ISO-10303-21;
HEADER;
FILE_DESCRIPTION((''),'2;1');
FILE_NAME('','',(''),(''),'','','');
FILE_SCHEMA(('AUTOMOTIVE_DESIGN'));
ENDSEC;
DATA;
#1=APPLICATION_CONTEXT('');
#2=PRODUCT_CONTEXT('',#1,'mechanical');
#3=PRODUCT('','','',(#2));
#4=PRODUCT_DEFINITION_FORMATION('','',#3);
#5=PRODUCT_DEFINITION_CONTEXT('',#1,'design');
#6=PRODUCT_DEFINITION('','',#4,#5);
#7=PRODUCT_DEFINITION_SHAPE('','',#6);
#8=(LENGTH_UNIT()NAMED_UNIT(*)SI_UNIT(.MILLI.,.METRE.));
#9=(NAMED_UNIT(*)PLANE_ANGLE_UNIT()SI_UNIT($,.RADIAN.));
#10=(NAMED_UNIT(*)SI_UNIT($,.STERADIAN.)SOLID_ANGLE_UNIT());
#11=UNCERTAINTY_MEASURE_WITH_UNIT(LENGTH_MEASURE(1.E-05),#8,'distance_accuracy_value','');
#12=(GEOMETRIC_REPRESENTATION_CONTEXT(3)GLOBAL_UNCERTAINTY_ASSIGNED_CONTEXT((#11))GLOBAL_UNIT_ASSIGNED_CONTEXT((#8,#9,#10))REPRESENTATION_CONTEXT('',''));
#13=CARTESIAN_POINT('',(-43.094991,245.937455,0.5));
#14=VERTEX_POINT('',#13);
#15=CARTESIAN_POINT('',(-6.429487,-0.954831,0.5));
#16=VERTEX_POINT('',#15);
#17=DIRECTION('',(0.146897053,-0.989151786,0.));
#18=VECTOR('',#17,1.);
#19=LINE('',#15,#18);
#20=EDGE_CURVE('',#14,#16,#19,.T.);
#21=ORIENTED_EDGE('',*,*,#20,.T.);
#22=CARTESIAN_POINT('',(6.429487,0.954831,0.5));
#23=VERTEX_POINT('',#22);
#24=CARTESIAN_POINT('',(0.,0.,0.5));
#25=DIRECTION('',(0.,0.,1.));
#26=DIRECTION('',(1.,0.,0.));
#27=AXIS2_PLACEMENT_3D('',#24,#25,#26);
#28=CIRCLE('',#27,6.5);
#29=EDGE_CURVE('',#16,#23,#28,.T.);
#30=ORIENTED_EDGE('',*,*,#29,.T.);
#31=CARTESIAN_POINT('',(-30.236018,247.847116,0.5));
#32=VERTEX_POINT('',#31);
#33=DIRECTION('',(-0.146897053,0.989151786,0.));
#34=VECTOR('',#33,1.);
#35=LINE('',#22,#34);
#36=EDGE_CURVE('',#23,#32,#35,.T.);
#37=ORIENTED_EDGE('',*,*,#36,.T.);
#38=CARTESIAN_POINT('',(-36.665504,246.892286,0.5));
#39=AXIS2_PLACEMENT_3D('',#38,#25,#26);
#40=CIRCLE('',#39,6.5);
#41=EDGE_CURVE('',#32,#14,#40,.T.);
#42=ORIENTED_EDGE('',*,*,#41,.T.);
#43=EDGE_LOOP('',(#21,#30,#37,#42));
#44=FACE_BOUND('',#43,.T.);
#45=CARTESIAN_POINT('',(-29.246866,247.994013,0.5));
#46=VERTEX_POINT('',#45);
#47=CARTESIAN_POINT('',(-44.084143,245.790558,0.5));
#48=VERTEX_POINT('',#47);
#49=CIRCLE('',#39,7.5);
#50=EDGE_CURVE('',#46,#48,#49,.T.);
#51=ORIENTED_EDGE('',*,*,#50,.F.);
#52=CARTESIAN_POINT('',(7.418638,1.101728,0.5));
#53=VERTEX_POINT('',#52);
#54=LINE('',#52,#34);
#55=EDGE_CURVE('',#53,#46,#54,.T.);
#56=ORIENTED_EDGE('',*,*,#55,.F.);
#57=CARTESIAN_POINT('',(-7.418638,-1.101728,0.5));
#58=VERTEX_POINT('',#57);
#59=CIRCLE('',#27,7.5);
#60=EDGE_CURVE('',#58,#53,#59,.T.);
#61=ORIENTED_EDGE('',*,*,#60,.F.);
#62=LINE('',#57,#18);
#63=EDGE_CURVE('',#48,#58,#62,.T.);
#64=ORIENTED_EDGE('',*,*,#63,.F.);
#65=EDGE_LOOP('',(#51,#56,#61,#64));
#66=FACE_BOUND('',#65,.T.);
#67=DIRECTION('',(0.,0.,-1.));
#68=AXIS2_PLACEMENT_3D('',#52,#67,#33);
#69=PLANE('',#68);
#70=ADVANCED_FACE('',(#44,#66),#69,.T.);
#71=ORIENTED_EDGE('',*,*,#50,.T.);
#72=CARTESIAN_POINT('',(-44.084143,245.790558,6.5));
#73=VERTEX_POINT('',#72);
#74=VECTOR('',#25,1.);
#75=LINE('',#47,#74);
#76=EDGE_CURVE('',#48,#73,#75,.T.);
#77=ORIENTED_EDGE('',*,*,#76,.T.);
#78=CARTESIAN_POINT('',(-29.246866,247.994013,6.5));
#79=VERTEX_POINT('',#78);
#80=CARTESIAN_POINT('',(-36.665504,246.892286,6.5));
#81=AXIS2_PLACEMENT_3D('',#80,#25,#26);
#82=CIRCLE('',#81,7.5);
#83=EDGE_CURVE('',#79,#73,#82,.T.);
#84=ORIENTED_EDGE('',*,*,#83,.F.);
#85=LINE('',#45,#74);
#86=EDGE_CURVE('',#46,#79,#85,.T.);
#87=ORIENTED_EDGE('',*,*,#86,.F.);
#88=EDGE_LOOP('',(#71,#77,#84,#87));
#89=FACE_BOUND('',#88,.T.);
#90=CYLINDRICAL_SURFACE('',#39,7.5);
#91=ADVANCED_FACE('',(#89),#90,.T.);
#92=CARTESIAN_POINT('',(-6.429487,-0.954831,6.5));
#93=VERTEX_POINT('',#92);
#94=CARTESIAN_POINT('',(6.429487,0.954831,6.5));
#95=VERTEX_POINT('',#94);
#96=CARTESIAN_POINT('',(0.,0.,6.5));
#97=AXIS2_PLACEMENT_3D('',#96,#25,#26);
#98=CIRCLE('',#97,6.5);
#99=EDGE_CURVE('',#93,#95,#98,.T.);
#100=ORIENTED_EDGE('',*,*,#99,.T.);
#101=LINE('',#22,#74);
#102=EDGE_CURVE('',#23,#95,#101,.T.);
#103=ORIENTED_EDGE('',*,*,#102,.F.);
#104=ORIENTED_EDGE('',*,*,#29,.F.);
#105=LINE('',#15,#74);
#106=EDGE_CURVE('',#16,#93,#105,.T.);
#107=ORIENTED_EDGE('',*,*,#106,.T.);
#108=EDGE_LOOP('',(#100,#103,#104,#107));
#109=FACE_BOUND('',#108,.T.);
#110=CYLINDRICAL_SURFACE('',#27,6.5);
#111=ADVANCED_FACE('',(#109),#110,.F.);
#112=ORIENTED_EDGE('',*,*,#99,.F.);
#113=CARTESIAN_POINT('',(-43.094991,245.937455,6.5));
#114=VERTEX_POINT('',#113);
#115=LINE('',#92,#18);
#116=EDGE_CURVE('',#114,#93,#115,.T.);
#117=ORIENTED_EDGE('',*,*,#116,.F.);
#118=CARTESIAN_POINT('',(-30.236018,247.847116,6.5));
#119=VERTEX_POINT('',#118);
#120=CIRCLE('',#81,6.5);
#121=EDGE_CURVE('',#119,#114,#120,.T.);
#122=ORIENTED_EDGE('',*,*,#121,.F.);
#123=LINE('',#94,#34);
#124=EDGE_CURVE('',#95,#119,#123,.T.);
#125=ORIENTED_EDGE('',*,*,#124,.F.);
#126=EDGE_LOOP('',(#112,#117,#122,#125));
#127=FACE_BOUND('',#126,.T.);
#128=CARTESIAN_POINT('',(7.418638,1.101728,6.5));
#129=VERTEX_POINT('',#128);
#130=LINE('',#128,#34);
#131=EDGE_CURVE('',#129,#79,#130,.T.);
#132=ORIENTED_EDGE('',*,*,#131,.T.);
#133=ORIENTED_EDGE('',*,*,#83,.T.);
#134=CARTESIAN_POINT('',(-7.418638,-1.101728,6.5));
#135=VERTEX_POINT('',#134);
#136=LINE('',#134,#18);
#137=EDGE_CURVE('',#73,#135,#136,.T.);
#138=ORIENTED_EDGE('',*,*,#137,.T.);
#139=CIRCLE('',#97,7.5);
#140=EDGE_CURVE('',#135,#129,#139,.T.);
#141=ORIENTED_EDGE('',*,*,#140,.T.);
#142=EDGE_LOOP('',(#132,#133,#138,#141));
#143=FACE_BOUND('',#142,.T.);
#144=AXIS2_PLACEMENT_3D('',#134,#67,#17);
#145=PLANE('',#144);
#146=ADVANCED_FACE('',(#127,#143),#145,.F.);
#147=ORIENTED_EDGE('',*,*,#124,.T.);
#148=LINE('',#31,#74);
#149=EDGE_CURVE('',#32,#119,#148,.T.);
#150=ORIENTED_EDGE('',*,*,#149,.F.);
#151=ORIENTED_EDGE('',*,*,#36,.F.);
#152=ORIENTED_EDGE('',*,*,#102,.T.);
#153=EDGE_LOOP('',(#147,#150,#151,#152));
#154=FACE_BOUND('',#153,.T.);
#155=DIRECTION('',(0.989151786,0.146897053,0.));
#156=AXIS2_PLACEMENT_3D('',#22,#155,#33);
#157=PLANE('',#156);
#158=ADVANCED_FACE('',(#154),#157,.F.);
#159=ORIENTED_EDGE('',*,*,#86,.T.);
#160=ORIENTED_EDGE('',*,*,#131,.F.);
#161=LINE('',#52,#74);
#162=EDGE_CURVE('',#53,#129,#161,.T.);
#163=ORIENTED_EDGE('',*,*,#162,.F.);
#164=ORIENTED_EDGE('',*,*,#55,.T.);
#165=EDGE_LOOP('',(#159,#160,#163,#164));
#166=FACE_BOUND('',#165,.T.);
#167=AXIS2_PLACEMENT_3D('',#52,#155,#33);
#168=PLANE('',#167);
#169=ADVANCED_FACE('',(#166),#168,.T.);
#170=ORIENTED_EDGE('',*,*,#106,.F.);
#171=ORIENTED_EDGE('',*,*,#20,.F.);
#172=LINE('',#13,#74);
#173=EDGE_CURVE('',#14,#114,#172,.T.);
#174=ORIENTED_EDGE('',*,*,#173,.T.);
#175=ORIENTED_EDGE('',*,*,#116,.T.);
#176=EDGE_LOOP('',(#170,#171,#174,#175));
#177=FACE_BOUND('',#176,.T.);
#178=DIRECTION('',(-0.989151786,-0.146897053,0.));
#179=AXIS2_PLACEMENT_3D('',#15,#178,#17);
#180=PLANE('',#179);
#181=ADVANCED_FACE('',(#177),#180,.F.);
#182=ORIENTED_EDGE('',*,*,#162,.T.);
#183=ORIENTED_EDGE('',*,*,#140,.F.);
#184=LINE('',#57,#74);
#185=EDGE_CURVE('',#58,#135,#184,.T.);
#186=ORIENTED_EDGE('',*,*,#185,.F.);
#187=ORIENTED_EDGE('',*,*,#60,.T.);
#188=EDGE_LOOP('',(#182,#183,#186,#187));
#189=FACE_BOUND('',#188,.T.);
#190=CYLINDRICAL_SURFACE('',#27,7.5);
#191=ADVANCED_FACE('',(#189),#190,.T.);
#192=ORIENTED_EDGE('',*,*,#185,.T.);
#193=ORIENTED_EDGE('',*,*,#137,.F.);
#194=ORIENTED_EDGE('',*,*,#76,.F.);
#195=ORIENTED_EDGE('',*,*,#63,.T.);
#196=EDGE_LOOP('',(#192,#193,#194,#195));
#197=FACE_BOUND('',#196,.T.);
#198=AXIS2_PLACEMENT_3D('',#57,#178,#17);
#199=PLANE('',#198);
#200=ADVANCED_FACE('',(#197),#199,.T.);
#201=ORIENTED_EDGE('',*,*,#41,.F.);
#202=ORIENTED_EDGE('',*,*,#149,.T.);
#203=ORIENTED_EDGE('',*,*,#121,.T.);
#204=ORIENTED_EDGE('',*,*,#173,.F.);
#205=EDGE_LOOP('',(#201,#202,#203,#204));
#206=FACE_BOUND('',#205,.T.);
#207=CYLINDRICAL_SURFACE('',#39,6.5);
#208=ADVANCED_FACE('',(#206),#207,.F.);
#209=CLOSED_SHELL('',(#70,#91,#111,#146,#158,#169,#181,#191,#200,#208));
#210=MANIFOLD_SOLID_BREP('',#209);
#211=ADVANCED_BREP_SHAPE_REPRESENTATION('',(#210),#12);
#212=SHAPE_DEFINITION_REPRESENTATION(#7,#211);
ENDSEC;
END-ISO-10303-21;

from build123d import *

# Parameters (mm, degrees)
THICKEN1_START = 0.5
THICKEN1_DEPTH = 6


# Read off the part's stored shape, not the designer's step: Thicken1
with BuildPart() as part:
    # Thicken1 outline → Thicken1 (new body)
    with BuildSketch(Plane.XY.offset(THICKEN1_START)):
        with BuildLine():
            Line((-44.084142674, 245.790557606), (-7.418638396, -1.101727894))
            ThreePointArc((-7.418638396, -1.101727894), (1.101727894, -7.418638396), (7.418638396, 1.101727894))
            Line((7.418638396, 1.101727894), (-29.246865883, 247.994013395))
            ThreePointArc((-29.246865883, 247.994013395), (-37.767232173, 254.310923896), (-44.084142674, 245.790557606))
        make_face()
        with BuildLine():
            ThreePointArc((6.42948661, 0.954830842), (0.954830842, -6.42948661), (-6.42948661, -0.954830842))
            Line((-6.42948661, -0.954830842), (-43.094990888, 245.937454659))
            ThreePointArc((-43.094990888, 245.937454659), (-37.62033512, 253.32177211), (-30.236017669, 247.847116343))
            Line((-30.236017669, 247.847116343), (6.42948661, 0.954830842))
        make_face(mode=Mode.SUBTRACT)
    extrude(amount=THICKEN1_DEPTH)


solid = part.part
